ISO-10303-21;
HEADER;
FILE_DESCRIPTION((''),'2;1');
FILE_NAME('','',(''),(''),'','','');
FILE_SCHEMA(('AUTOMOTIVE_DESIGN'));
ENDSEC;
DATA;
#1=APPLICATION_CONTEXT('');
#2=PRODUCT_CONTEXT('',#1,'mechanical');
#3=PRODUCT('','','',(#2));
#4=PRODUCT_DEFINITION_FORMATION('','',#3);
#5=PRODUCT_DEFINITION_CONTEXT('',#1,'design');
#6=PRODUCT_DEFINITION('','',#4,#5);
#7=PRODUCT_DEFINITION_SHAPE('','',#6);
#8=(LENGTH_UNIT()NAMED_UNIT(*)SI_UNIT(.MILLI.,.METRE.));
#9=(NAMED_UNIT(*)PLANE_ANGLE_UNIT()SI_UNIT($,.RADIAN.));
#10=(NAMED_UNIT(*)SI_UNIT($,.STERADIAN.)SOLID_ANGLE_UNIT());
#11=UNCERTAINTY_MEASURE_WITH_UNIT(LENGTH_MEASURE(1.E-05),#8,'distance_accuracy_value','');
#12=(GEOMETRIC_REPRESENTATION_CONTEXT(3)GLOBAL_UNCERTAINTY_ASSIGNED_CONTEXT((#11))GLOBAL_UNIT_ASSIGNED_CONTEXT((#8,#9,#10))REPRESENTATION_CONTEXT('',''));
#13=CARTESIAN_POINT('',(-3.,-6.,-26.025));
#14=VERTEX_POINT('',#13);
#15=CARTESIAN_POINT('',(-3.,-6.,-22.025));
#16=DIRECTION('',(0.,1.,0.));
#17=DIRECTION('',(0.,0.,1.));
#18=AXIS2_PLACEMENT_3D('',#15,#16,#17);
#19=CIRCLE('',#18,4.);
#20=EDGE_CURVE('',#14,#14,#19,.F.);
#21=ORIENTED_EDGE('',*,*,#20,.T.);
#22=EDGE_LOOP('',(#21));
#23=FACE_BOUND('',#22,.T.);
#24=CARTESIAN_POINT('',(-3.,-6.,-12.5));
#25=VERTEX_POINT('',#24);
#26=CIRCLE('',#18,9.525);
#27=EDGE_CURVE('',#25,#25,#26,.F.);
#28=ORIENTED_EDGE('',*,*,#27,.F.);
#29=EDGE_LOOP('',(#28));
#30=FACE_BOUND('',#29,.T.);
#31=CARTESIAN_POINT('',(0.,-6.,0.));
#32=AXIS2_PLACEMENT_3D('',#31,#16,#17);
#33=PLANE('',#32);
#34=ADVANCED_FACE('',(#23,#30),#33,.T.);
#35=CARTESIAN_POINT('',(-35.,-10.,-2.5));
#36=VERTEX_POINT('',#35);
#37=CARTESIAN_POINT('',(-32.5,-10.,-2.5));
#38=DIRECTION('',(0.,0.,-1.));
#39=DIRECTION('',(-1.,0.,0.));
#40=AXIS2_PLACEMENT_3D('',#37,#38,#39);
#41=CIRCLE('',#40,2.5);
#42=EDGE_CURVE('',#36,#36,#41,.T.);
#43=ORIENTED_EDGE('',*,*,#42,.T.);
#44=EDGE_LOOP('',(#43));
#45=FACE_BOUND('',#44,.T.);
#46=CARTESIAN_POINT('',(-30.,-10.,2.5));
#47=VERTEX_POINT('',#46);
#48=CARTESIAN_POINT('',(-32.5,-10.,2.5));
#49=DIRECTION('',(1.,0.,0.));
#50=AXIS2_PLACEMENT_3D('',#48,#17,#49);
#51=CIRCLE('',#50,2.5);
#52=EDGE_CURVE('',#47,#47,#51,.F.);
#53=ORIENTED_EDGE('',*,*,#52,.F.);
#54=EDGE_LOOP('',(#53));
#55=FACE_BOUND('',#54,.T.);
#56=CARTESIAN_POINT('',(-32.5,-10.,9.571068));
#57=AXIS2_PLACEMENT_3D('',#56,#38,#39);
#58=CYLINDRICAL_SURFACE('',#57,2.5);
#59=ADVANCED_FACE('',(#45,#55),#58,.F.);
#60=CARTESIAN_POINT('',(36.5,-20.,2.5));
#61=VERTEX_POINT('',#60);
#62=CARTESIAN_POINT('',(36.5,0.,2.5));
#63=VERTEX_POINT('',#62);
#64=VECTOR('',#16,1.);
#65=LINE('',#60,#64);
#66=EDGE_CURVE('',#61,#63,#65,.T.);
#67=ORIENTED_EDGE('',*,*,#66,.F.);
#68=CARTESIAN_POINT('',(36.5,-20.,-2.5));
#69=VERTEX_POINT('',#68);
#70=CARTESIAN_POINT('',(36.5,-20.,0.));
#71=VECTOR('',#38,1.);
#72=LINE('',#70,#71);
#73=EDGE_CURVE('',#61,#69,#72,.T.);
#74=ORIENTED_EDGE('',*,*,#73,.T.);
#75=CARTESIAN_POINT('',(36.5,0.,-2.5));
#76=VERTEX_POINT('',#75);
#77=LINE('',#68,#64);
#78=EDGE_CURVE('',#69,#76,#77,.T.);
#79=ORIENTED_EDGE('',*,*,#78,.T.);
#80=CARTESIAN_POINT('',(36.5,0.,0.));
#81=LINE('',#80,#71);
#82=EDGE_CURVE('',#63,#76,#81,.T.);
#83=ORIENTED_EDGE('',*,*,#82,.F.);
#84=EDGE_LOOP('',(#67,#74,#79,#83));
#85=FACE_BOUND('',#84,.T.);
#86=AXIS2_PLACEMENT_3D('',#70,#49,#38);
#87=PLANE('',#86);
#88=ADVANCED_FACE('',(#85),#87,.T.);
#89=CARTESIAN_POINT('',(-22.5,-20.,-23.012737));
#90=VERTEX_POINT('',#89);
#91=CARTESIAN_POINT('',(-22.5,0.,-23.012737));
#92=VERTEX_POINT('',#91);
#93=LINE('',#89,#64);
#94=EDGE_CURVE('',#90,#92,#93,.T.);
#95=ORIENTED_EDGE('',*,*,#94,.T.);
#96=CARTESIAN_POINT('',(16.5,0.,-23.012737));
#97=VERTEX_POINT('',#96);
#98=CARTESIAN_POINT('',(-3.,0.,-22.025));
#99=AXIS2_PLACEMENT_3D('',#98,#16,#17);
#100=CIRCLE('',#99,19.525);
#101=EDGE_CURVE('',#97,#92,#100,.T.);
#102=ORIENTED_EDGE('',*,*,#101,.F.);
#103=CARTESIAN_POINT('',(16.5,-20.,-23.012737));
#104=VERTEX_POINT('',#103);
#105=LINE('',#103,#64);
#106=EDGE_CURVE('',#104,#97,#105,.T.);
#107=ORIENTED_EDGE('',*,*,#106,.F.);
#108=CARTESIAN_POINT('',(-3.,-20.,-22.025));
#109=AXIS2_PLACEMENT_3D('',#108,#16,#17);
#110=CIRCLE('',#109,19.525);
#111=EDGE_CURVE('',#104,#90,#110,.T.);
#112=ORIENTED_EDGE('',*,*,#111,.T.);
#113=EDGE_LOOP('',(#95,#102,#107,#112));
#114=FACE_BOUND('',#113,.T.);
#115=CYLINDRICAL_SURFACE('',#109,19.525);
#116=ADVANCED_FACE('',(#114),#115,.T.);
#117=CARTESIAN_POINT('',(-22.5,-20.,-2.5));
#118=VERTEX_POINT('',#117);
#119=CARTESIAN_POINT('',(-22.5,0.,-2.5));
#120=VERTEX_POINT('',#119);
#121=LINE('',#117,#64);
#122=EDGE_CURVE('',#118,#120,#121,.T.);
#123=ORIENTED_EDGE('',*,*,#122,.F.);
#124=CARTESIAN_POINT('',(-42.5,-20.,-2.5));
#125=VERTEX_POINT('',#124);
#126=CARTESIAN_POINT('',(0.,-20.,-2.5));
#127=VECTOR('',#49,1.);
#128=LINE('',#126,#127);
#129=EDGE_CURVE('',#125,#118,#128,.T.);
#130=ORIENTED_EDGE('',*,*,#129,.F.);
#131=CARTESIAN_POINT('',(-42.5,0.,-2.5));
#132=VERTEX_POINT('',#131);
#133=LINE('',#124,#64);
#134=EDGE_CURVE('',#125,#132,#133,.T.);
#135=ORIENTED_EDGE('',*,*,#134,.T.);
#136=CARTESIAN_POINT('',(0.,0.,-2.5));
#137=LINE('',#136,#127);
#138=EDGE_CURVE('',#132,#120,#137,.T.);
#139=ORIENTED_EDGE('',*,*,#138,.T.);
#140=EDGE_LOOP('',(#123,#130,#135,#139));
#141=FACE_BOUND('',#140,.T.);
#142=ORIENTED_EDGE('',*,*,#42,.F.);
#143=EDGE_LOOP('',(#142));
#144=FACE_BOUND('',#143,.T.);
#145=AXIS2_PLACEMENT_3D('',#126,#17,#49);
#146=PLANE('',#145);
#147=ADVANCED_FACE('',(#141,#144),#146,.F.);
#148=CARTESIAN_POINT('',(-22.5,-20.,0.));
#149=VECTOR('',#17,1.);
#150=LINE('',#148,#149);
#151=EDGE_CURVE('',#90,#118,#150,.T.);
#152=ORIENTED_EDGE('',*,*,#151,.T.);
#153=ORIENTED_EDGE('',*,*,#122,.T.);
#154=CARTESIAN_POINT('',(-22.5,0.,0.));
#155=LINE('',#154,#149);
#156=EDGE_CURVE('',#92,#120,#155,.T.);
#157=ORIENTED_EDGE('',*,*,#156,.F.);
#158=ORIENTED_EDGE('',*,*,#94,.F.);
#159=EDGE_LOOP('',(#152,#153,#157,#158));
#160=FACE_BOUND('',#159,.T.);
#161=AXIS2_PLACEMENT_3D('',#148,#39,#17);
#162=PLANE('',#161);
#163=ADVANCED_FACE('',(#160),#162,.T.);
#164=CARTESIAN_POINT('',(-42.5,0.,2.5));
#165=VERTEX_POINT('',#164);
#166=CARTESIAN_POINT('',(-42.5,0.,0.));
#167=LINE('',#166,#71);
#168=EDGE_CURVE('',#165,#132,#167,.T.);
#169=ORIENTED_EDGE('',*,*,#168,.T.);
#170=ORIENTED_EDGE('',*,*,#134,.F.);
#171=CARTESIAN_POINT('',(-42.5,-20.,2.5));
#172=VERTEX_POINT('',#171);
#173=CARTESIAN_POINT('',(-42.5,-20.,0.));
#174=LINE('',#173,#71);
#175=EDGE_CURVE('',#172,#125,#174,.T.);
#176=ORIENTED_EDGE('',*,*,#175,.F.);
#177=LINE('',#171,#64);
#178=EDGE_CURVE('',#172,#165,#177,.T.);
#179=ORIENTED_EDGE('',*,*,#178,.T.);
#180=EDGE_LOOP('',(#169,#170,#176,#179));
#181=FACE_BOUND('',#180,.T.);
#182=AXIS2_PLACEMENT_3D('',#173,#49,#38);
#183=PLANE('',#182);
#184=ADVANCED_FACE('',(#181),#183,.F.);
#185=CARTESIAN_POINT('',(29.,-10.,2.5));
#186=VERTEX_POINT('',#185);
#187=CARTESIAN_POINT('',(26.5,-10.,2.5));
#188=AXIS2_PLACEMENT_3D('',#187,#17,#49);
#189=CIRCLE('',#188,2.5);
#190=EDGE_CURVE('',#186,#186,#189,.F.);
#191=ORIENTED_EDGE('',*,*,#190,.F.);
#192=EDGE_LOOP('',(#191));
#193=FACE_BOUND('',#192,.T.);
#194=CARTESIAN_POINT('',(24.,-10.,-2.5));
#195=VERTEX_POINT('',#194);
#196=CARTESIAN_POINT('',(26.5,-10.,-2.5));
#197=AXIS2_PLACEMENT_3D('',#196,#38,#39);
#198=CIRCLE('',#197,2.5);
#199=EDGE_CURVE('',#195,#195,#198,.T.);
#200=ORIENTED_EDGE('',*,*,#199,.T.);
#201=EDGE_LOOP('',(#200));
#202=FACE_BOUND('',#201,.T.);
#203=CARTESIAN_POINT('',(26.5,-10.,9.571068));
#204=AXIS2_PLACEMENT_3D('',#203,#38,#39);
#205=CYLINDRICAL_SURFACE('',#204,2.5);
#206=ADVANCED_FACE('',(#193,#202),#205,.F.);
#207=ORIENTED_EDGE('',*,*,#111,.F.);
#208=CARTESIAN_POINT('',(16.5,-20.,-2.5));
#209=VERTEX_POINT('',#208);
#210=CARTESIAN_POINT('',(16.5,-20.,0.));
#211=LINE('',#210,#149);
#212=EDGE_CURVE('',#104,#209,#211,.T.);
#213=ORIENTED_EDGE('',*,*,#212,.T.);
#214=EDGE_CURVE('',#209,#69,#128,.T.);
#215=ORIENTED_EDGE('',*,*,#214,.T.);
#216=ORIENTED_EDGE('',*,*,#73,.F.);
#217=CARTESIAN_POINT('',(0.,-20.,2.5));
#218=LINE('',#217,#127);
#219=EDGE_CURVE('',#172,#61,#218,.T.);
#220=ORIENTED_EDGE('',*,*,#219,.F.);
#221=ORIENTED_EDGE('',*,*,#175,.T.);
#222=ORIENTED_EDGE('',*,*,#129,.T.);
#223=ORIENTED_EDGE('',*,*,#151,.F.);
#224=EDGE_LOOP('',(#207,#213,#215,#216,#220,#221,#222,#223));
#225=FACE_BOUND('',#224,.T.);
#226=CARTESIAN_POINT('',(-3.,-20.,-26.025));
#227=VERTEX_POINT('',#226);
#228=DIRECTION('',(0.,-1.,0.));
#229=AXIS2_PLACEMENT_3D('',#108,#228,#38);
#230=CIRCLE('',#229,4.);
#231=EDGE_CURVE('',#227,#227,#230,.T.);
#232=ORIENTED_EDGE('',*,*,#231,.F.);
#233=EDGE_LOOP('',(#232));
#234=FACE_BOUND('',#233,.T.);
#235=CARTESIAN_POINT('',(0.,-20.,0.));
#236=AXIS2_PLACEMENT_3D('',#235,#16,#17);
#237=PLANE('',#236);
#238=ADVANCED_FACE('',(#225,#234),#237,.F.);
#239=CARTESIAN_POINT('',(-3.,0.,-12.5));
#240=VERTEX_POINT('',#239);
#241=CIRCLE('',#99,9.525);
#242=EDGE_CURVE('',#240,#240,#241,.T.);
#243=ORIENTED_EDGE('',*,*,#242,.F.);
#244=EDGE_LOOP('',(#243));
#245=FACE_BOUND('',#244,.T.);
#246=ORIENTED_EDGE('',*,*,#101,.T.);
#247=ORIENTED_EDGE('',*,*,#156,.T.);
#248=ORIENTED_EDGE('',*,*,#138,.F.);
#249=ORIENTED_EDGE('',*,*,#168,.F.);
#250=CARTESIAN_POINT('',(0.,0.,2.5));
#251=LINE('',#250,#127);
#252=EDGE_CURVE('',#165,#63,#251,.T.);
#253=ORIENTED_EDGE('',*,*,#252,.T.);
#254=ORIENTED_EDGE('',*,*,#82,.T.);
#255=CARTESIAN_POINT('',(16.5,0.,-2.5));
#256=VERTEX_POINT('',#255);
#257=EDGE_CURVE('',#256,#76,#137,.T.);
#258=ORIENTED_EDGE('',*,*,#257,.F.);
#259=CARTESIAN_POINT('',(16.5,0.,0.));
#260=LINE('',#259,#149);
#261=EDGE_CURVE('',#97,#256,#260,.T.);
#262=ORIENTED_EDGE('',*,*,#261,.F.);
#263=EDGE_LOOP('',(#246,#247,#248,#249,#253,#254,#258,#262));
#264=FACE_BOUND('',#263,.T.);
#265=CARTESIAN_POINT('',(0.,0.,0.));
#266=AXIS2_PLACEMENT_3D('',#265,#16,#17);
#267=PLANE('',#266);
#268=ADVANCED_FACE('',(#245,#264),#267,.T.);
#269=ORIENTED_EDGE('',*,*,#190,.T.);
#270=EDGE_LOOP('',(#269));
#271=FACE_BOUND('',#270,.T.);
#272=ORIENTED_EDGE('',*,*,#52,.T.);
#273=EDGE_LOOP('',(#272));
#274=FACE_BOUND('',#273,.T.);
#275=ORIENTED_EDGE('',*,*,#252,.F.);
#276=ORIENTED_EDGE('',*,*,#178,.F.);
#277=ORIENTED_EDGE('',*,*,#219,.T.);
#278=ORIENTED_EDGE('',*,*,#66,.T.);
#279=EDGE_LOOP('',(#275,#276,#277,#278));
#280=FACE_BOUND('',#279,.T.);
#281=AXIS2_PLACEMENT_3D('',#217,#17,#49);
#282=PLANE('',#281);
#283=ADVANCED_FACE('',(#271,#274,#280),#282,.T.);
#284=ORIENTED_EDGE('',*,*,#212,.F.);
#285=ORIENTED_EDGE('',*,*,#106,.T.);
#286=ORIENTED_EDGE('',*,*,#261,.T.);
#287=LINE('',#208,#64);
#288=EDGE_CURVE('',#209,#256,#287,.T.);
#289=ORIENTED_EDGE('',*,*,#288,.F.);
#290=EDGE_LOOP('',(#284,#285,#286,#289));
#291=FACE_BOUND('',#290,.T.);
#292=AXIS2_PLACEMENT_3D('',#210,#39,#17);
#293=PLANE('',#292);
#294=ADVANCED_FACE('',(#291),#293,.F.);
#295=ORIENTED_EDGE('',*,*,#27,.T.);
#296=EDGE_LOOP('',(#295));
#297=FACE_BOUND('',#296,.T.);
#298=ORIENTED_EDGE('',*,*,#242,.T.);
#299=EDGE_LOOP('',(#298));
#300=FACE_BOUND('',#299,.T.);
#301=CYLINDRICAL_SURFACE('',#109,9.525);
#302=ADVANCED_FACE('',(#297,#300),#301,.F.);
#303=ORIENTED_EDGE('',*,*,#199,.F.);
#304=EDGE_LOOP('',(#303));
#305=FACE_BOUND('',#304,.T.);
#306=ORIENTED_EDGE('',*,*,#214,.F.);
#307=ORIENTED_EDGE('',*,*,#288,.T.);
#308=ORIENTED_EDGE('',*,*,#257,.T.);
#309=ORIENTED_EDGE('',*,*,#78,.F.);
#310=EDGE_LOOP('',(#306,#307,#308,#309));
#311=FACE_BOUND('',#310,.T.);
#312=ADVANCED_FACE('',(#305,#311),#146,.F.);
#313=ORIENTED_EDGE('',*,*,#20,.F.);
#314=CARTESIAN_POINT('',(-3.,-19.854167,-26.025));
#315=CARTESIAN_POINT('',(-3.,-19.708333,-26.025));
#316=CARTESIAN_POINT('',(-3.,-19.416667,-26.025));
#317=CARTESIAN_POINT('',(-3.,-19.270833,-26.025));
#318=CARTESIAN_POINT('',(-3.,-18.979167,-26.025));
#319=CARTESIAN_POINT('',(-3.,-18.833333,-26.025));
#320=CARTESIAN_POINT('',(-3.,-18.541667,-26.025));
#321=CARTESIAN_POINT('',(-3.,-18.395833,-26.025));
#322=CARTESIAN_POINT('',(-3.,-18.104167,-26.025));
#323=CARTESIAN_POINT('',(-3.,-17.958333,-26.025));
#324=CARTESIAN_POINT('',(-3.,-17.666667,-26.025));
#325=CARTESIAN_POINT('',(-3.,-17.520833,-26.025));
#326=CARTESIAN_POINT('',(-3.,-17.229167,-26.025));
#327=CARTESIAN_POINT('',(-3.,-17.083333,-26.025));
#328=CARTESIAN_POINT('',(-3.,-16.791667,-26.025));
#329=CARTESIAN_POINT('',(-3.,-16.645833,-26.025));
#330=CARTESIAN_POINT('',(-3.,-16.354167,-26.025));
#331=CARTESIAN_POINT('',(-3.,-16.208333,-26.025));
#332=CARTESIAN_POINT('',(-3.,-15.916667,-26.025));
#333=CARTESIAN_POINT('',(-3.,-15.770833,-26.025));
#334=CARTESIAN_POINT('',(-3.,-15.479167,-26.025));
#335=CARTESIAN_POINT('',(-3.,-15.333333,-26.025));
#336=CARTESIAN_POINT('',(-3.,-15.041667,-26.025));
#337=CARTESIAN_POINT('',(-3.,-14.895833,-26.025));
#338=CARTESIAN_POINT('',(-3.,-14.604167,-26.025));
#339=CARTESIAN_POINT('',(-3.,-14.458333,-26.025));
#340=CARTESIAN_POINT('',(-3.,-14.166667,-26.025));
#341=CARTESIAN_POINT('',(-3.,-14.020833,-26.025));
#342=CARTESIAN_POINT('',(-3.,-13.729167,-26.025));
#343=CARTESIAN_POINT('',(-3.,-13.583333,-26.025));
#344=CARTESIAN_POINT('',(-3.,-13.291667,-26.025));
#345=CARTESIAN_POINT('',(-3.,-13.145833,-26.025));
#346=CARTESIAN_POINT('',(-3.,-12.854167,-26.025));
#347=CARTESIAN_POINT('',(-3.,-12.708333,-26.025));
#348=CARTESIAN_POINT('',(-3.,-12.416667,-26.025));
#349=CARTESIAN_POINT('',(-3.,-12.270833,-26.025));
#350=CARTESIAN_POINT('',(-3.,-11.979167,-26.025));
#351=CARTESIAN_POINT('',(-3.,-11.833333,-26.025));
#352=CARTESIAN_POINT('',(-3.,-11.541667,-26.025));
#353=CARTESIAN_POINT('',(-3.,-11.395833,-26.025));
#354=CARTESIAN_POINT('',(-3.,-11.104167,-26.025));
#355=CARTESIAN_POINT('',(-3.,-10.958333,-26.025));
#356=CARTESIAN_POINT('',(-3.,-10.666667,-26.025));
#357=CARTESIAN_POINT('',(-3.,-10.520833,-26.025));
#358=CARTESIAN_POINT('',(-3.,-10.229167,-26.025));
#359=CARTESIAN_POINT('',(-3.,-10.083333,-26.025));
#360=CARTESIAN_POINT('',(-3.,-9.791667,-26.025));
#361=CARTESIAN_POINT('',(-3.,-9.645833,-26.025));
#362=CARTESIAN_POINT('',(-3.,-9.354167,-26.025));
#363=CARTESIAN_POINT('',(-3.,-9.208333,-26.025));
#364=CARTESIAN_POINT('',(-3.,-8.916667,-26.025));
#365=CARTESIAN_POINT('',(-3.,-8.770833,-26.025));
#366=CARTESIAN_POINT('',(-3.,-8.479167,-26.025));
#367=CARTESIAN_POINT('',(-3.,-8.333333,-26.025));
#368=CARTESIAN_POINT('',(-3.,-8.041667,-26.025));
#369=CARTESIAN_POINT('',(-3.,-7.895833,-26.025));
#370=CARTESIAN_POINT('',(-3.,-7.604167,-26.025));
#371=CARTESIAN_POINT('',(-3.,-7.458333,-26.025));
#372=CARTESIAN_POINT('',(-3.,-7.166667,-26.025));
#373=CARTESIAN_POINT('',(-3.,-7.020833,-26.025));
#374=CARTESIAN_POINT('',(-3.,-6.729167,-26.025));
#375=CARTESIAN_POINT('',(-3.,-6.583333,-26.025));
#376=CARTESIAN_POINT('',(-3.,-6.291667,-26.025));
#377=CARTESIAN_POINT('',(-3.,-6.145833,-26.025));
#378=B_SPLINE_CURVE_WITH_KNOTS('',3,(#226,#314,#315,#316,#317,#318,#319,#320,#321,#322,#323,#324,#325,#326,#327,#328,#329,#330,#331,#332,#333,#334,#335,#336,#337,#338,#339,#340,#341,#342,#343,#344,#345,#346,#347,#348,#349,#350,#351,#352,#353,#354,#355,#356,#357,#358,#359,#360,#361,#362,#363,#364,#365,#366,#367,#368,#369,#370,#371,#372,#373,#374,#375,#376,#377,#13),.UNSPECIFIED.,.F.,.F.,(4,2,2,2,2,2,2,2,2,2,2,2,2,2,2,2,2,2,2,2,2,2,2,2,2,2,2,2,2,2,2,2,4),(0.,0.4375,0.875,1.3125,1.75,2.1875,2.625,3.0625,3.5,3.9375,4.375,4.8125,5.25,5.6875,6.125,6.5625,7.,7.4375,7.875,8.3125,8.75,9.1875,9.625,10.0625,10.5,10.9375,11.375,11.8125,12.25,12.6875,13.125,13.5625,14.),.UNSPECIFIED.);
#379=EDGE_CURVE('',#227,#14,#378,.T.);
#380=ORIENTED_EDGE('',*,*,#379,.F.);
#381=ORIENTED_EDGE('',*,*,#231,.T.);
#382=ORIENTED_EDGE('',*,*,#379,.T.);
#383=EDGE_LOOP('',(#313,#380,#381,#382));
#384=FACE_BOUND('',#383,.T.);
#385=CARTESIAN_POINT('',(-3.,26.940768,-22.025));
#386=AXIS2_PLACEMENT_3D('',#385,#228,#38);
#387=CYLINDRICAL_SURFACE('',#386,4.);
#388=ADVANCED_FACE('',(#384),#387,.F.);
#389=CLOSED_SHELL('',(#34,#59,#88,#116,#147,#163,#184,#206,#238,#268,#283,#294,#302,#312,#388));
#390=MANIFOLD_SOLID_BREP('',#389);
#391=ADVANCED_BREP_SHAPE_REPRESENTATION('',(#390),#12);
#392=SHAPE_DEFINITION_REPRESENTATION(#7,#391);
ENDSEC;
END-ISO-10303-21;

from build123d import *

# Parameters (mm, degrees)
BODY_START           = -20
BODY_OUTLINE_R       = 9.525
BODY_DEPTH           = 20
SKETCH2_R            = 2.5
MOUNTING_HOLES_DEPTH = 5
SKETCH3_R            = 9.525
SKETCH3_R_2          = 4
HOLEINSERT_DEPTH     = 14


# Read off the part's stored shape, not the designer's step: Body
with BuildPart() as part:
    # Body outline → Body (new body)
    with BuildSketch(Plane(origin=(0, 0, 0), x_dir=(1, 0, 0), z_dir=(0, 1, 0)).offset(BODY_START)):
        with BuildLine():
            Line((16.5, 2.5), (16.5, 23.012737313))
            ThreePointArc((16.5, 23.012737313), (-3, 41.55), (-22.5, 23.012737313))
            Line((-22.5, 23.012737313), (-22.5, 2.5))
            Line((-22.5, 2.5), (-42.5, 2.5))
            Line((-42.5, 2.5), (-42.5, -2.5))
            Line((-42.5, -2.5), (36.5, -2.5))
            Line((36.5, -2.5), (36.5, 2.5))
            Line((36.5, 2.5), (16.5, 2.5))
        make_face()
        with Locations((-3, 22.025)):
            Circle(BODY_OUTLINE_R, mode=Mode.SUBTRACT)
    extrude(amount=BODY_DEPTH)

    # Sketch2 → Mounting Holes (cut)
    with BuildSketch(Plane(origin=(0, 0, -2.5), x_dir=(-1, 0, 0), z_dir=(0, 0, -1))):
        with Locations((-26.5, -10)):
            Circle(SKETCH2_R)
        with Locations((32.5, -10)):
            Circle(SKETCH2_R)
    extrude(amount=-MOUNTING_HOLES_DEPTH, mode=Mode.SUBTRACT)

    # Sketch3 → HoleInsert (add)
    with BuildSketch(Plane.XZ.offset(20)):
        with Locations(Location((-3, -22.025, 0), (0, 0, 90))):
            Circle(SKETCH3_R)
        with Locations(Location((-3, -22.025, 0), (0, 0, 270))):
            Circle(SKETCH3_R_2, mode=Mode.SUBTRACT)
    extrude(amount=-HOLEINSERT_DEPTH)


solid = part.part
